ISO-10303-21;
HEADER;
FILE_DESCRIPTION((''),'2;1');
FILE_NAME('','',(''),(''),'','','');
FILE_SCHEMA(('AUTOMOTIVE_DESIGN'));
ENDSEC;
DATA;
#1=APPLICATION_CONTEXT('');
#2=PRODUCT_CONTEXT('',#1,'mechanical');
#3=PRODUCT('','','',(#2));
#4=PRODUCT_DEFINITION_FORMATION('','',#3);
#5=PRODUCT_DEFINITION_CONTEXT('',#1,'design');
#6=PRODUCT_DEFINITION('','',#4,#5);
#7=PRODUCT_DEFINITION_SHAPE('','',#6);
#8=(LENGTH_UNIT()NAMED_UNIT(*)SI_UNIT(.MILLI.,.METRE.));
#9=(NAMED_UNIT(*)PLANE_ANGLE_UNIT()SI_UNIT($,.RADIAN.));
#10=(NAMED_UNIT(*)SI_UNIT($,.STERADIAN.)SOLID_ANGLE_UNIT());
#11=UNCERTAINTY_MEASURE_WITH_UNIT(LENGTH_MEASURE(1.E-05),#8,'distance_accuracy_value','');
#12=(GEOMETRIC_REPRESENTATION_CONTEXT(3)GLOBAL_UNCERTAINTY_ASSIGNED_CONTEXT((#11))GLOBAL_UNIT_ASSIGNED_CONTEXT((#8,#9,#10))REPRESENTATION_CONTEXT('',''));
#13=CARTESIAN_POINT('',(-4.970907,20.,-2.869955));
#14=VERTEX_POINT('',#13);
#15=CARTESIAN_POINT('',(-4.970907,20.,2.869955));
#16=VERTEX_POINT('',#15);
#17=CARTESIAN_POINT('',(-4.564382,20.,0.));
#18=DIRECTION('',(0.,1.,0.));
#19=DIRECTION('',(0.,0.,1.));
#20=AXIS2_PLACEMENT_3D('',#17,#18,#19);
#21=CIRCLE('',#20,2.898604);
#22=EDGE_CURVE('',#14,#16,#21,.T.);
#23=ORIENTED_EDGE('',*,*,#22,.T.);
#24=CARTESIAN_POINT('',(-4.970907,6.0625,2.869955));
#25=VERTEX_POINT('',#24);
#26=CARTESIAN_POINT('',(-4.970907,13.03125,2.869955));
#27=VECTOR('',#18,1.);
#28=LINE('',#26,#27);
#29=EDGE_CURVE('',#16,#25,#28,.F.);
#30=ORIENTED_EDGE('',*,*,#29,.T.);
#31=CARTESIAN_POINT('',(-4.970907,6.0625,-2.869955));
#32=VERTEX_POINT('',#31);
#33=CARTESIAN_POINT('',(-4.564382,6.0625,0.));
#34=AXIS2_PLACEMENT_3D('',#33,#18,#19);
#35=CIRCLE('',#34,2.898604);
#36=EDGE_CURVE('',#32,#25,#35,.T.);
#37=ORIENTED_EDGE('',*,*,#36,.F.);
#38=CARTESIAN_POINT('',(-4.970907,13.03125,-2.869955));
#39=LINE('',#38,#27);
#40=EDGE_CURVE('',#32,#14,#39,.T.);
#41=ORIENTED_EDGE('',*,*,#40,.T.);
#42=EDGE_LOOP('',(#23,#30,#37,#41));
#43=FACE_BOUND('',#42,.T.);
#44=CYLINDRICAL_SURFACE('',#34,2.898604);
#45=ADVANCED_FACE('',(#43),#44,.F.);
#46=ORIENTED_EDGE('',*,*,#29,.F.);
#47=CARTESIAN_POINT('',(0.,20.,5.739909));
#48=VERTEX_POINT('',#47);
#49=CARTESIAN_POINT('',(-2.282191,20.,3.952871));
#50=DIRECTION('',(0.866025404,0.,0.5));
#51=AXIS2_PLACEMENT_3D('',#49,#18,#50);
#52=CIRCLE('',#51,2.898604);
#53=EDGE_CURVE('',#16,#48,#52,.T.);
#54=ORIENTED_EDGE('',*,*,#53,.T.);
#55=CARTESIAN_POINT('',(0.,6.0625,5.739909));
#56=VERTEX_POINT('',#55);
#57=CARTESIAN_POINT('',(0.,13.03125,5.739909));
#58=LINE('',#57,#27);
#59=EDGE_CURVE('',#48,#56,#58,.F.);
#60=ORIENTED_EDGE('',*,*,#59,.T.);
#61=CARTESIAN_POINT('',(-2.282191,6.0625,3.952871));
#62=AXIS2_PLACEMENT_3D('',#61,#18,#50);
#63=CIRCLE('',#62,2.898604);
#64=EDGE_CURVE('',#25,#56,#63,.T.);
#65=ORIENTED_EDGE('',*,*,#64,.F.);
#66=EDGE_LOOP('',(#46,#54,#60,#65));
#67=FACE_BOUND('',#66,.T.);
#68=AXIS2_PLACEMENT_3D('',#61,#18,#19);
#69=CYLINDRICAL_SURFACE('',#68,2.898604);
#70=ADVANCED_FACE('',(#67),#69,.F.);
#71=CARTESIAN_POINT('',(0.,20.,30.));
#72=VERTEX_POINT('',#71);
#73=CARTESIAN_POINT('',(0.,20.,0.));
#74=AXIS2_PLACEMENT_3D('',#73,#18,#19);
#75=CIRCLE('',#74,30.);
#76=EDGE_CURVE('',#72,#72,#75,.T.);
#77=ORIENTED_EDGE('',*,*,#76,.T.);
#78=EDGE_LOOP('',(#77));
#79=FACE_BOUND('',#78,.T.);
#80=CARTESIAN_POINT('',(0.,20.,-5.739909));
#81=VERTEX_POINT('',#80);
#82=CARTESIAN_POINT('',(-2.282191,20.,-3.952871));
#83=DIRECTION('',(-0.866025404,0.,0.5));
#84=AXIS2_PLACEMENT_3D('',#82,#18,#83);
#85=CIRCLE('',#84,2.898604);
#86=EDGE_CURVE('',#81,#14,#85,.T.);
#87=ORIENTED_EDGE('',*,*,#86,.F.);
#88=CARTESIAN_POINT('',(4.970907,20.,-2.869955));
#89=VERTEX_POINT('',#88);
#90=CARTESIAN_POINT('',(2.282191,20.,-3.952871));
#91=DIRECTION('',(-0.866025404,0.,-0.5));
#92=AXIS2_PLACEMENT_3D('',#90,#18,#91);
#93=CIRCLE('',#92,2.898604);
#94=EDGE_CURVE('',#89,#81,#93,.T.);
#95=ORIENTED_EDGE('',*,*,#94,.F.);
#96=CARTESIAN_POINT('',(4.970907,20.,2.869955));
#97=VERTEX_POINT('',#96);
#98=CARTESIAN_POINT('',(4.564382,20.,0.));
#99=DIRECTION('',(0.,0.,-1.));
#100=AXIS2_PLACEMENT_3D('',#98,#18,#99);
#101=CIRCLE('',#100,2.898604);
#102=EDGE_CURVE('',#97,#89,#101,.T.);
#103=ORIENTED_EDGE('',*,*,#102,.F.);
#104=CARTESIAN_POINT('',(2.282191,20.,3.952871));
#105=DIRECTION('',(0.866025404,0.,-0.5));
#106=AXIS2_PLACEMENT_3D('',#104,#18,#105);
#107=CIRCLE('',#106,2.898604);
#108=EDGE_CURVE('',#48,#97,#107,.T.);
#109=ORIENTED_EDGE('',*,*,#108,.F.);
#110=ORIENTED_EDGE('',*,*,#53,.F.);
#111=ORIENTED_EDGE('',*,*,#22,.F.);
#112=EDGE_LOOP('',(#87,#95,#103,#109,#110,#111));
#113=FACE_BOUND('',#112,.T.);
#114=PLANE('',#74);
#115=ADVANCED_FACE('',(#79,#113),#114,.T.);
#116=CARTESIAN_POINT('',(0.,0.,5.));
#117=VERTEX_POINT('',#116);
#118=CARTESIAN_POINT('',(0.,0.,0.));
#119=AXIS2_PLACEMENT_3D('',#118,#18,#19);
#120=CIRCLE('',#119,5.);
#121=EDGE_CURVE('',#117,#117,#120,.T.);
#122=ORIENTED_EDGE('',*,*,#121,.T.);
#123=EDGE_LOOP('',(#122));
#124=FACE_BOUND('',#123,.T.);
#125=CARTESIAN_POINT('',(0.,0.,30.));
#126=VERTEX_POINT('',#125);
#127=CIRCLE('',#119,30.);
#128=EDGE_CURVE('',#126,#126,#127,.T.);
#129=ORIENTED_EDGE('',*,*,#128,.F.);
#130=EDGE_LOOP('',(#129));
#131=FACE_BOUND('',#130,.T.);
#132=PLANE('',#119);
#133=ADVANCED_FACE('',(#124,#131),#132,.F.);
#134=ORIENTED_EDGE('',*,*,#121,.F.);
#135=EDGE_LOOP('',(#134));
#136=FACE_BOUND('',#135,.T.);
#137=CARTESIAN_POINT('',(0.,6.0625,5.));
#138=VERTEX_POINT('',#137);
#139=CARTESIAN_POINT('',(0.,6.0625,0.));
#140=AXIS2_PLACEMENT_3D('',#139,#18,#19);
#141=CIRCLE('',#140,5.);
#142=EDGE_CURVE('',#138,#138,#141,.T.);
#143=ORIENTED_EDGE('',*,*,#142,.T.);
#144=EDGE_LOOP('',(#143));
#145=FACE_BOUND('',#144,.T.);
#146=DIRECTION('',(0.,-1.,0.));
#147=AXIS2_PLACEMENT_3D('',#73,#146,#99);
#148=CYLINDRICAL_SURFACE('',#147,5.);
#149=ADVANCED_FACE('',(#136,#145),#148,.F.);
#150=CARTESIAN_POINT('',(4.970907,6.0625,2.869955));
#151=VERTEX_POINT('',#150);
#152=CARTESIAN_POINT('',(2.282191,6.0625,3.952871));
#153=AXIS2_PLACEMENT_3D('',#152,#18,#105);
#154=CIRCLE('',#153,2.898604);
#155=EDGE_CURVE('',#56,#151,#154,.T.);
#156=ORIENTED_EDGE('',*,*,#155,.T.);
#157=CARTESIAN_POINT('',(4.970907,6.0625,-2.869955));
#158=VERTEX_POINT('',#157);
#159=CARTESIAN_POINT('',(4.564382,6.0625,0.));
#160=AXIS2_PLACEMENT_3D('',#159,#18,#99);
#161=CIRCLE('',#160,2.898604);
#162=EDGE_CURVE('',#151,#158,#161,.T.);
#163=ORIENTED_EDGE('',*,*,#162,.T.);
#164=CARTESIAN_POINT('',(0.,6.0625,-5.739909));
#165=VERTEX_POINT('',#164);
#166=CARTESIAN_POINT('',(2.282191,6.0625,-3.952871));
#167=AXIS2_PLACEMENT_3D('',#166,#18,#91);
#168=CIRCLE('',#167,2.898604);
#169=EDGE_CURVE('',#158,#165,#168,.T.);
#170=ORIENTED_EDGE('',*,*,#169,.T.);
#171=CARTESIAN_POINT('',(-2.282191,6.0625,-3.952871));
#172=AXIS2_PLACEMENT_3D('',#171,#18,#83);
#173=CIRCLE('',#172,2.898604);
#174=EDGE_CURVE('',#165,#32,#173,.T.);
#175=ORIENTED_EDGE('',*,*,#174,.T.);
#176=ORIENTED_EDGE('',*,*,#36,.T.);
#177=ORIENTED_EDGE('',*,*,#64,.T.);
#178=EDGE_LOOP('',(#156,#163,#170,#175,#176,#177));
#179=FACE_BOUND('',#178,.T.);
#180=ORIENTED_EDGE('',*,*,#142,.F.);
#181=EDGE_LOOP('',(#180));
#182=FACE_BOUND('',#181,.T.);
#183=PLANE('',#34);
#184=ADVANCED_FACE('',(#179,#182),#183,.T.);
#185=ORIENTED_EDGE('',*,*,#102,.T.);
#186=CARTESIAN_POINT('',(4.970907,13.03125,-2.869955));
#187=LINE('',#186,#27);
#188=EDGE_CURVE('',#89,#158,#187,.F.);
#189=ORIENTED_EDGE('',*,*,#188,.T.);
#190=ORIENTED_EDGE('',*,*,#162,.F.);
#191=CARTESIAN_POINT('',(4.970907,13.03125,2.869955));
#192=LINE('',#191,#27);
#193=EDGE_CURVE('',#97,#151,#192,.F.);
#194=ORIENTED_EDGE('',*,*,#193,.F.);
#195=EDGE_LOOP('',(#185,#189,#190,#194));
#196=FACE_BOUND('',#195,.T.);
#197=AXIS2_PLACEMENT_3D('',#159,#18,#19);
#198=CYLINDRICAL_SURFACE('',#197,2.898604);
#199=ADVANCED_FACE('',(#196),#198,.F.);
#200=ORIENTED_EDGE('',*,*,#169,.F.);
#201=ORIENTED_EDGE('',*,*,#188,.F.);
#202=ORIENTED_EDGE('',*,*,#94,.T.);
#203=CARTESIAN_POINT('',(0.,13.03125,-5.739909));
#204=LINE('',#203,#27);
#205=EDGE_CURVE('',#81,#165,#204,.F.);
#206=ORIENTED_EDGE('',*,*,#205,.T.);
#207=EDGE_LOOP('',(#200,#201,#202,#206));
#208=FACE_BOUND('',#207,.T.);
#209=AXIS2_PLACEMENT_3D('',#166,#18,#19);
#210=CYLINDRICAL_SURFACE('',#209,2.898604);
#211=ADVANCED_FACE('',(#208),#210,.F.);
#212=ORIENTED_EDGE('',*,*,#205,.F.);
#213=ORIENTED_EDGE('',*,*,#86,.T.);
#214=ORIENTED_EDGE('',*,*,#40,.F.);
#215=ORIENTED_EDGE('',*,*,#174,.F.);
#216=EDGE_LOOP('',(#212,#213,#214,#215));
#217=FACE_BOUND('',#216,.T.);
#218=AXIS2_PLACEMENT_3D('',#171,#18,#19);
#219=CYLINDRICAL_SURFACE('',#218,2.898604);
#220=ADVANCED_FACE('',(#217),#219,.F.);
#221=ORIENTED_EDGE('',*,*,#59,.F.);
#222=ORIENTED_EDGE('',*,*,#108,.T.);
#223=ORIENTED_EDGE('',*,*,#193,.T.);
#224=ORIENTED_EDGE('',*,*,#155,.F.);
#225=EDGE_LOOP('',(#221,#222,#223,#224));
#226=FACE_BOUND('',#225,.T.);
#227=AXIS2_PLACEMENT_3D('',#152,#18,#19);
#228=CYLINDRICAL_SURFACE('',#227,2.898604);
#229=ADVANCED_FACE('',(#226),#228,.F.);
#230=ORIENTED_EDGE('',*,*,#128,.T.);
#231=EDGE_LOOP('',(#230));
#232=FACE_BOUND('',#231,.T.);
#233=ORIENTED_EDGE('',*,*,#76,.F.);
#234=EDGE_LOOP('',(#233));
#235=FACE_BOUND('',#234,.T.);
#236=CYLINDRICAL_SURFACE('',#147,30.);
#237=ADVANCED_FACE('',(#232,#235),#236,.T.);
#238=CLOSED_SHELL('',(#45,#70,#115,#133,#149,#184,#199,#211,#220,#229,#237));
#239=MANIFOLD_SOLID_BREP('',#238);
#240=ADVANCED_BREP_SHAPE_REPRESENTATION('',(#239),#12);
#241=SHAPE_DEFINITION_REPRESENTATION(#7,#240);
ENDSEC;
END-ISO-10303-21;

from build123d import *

# Parameters (mm, degrees)
SKETCH1_R           = 30
BOSS_EXTRUDE1_DEPTH = 20
SKETCH2_R           = 5
CUT_EXTRUDE1_DEPTH  = 47.904157598
SKETCH3_R           = 2.898603643
CUT_EXTRUDE2_DEPTH  = 13.937500009
CIRPATTERN1_COUNT   = 6


with BuildPart() as part:
    # Sketch1 → Boss-Extrude1 (new body)
    with BuildSketch(Plane(origin=(0, 0, 0), x_dir=(1, 0, 0), z_dir=(0, 1, 0))):
        Circle(SKETCH1_R)
    extrude(amount=BOSS_EXTRUDE1_DEPTH)

    # Sketch2 → Cut-Extrude1 (cut, through all)
    with BuildSketch(Plane(origin=(0, 0, 0), x_dir=(1, 0, 0), z_dir=(0, 1, 0))):
        Circle(SKETCH2_R)
    extrude(amount=CUT_EXTRUDE1_DEPTH, mode=Mode.SUBTRACT)

    # Sketch3 → Cut-Extrude2 (cut)
    with BuildSketch(Plane(origin=(0, 20, 0), x_dir=(1, 0, 0), z_dir=(0, 1, 0))):
        with Locations((-4.564381882, 0)):
            Circle(SKETCH3_R)
    cut_extrude2 = extrude(amount=-CUT_EXTRUDE2_DEPTH, mode=Mode.SUBTRACT)

    # CirPattern1: Cut-Extrude2 ×6 about axis
    cirpattern1_axis = Axis((0, 0, 0), (0, 1, 0))
    for i in range(1, CIRPATTERN1_COUNT):
        add(cut_extrude2.rotate(cirpattern1_axis, i * 360 / CIRPATTERN1_COUNT), mode=Mode.SUBTRACT)


solid = part.part
